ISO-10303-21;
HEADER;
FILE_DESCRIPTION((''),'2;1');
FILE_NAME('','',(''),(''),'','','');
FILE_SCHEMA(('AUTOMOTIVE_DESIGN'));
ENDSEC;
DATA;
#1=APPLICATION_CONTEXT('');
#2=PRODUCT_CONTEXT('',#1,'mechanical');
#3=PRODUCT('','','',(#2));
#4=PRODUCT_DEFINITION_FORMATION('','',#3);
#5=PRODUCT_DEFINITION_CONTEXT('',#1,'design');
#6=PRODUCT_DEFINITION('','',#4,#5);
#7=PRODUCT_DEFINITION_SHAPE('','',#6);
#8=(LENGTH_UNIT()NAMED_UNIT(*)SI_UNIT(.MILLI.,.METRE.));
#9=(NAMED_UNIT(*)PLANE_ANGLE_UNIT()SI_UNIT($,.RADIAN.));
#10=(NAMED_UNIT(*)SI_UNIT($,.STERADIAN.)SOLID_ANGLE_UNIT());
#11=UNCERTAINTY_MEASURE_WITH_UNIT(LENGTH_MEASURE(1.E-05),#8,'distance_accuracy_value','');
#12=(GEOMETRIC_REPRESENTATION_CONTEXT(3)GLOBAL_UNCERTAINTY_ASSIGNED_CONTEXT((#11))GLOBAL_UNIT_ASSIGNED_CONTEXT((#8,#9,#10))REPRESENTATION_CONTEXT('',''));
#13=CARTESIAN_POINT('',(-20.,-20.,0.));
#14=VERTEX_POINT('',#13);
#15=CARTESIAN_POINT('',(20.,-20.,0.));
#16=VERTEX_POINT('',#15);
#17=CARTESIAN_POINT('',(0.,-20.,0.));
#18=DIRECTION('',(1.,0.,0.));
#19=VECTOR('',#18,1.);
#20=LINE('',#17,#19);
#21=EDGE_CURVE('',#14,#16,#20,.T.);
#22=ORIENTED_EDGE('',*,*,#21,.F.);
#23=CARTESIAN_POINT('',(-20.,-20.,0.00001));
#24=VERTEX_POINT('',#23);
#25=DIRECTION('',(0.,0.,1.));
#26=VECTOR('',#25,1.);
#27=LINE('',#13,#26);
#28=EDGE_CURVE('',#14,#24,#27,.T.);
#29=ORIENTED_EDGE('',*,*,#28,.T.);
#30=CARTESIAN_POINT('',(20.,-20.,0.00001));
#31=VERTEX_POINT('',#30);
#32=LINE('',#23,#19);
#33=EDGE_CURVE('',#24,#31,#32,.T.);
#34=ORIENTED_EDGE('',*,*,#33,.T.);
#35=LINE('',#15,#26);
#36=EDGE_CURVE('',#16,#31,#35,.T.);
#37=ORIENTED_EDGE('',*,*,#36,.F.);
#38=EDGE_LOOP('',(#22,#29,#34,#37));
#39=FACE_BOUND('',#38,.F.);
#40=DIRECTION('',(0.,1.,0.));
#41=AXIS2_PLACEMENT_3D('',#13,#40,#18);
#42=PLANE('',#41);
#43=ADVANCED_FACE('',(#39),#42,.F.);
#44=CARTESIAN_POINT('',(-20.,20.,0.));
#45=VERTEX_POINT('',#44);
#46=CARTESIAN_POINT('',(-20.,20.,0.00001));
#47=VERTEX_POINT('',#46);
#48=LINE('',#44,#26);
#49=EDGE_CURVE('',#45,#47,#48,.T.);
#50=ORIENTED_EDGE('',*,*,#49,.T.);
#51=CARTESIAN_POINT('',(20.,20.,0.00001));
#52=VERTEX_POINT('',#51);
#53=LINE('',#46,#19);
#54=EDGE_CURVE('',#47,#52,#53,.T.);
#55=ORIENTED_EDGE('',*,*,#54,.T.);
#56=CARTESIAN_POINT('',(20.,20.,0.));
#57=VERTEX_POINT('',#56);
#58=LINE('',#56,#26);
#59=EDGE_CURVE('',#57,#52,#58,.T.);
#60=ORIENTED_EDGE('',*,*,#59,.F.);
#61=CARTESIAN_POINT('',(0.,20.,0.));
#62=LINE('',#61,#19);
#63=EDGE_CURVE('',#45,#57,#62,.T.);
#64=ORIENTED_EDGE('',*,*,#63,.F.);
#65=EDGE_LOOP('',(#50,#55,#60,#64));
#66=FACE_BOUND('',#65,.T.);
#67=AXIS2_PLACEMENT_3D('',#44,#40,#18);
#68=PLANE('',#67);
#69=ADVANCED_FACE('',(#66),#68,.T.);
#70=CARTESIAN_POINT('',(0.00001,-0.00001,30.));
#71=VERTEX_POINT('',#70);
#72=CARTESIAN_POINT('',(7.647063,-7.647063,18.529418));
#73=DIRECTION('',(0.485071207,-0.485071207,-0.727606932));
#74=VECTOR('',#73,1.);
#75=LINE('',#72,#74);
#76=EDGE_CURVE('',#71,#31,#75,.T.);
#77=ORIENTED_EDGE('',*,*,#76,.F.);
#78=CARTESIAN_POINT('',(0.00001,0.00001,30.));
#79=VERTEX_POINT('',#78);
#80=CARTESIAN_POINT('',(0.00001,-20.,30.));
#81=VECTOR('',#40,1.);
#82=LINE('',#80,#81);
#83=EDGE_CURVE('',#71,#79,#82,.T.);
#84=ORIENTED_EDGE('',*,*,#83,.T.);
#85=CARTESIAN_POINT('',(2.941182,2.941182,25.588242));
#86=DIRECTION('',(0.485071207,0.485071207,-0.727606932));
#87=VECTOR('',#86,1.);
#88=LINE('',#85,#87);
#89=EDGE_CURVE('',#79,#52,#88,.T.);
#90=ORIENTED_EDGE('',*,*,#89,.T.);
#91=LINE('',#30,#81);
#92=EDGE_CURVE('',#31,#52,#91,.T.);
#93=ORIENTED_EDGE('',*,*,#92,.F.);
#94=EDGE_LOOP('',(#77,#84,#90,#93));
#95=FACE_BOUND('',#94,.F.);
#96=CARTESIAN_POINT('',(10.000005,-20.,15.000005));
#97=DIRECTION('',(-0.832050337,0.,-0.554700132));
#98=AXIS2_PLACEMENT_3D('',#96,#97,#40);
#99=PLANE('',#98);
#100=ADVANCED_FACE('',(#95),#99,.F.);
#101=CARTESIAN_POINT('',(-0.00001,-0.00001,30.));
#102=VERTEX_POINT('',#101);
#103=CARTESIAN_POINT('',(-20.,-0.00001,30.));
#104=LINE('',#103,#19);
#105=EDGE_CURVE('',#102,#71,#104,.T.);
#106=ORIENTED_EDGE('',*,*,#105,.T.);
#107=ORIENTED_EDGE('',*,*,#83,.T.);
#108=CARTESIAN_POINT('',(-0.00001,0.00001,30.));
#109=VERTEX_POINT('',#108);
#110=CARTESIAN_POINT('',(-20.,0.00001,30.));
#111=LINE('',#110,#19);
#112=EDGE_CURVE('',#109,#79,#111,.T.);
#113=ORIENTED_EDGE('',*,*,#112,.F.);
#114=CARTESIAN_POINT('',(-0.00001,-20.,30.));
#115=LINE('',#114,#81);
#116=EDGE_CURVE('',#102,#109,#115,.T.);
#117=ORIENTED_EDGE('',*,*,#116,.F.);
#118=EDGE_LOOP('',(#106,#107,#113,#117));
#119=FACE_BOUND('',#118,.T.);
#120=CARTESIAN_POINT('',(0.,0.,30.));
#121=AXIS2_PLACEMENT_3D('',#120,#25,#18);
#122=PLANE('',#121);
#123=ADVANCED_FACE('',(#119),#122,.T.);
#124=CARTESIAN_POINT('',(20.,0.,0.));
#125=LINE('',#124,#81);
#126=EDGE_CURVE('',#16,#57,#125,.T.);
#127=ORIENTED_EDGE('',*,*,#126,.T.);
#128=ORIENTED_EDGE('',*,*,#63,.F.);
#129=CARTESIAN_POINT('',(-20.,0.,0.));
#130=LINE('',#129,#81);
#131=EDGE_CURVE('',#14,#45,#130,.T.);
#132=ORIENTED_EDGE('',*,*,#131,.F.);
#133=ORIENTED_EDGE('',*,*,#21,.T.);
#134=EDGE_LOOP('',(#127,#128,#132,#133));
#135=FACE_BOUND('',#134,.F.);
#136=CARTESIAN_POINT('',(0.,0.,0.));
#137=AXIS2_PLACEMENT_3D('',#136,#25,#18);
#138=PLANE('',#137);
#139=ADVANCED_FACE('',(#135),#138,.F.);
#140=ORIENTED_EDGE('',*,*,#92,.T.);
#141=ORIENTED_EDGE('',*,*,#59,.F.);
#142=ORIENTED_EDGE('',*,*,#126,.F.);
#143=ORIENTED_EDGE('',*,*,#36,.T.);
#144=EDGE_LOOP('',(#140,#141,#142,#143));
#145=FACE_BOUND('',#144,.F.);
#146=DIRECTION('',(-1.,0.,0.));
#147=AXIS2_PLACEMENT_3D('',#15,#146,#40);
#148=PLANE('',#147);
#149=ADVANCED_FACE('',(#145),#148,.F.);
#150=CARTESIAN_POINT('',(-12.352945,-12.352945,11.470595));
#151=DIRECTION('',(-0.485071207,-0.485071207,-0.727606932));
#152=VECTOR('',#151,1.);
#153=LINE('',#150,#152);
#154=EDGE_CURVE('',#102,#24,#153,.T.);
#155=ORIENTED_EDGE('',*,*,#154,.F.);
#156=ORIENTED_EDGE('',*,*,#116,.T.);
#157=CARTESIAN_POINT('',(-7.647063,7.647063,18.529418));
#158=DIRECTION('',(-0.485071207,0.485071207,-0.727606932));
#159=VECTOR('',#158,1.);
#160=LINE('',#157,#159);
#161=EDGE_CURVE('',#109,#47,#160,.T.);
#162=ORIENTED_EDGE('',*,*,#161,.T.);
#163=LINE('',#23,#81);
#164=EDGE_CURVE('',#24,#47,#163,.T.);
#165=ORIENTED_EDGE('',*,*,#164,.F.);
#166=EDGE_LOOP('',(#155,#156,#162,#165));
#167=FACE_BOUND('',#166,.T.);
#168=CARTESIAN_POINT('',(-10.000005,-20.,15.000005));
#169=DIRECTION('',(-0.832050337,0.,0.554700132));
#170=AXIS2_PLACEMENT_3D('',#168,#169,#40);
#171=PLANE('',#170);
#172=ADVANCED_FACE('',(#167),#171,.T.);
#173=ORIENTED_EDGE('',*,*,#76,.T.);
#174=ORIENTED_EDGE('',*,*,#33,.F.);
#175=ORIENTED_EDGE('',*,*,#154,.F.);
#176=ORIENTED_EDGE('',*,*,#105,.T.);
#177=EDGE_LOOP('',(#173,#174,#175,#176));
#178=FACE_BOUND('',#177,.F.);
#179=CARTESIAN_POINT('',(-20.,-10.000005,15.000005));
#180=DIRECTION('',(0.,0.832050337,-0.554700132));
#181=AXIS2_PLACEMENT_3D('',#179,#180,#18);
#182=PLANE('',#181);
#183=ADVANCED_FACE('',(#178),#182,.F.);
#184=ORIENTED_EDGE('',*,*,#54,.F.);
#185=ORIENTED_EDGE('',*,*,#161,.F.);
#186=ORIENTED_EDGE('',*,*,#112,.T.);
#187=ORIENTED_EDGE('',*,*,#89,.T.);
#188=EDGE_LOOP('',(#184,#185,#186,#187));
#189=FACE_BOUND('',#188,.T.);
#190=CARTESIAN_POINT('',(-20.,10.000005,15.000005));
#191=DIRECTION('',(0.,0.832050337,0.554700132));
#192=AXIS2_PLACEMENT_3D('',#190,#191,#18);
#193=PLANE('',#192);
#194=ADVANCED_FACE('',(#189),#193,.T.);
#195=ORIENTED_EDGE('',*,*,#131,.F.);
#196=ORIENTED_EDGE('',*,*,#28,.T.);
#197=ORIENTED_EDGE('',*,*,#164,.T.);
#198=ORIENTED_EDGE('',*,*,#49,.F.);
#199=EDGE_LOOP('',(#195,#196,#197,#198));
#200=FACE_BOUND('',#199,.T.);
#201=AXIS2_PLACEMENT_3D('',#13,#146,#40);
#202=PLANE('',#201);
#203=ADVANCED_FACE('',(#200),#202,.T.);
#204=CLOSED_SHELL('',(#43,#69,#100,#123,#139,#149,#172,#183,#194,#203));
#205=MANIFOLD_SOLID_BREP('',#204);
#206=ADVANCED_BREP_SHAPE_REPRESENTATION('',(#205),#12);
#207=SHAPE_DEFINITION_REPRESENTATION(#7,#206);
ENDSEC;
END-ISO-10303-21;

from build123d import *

# Parameters (mm, degrees)
F0_W     = 40
F0_H     = 40
F1_DEPTH = 30
F2_SIZE2 = 29.99999
F2_SIZE  = 19.99999


# Not quite as in the source:
# - a fillet or chamfer is up to 0.001 mm smaller than in the source, because OpenCascade refuses the exact size


with BuildPart() as f1:
    # F0 (on Top) → F1 (new body)
    with BuildSketch(Plane.XY):
        Rectangle(F0_W, F0_H)
    extrude(amount=F1_DEPTH)

    # F2 (size 20 and 30 in the source; OpenCascade refuses exactly that, so slightly less here)
    f2_edges = [f1.edges().sort_by_distance(p)[0] for p in [
        (-20, 0, 30),
        (0, 20, 30),
        (0, -20, 30),
        (20, 0, 30),
    ]]
    f2_side = f1.faces().sort_by_distance((0, 0, 30))[0]
    chamfer(f2_edges, length=F2_SIZE, length2=F2_SIZE2, reference=f2_side)


solid = f1.part
